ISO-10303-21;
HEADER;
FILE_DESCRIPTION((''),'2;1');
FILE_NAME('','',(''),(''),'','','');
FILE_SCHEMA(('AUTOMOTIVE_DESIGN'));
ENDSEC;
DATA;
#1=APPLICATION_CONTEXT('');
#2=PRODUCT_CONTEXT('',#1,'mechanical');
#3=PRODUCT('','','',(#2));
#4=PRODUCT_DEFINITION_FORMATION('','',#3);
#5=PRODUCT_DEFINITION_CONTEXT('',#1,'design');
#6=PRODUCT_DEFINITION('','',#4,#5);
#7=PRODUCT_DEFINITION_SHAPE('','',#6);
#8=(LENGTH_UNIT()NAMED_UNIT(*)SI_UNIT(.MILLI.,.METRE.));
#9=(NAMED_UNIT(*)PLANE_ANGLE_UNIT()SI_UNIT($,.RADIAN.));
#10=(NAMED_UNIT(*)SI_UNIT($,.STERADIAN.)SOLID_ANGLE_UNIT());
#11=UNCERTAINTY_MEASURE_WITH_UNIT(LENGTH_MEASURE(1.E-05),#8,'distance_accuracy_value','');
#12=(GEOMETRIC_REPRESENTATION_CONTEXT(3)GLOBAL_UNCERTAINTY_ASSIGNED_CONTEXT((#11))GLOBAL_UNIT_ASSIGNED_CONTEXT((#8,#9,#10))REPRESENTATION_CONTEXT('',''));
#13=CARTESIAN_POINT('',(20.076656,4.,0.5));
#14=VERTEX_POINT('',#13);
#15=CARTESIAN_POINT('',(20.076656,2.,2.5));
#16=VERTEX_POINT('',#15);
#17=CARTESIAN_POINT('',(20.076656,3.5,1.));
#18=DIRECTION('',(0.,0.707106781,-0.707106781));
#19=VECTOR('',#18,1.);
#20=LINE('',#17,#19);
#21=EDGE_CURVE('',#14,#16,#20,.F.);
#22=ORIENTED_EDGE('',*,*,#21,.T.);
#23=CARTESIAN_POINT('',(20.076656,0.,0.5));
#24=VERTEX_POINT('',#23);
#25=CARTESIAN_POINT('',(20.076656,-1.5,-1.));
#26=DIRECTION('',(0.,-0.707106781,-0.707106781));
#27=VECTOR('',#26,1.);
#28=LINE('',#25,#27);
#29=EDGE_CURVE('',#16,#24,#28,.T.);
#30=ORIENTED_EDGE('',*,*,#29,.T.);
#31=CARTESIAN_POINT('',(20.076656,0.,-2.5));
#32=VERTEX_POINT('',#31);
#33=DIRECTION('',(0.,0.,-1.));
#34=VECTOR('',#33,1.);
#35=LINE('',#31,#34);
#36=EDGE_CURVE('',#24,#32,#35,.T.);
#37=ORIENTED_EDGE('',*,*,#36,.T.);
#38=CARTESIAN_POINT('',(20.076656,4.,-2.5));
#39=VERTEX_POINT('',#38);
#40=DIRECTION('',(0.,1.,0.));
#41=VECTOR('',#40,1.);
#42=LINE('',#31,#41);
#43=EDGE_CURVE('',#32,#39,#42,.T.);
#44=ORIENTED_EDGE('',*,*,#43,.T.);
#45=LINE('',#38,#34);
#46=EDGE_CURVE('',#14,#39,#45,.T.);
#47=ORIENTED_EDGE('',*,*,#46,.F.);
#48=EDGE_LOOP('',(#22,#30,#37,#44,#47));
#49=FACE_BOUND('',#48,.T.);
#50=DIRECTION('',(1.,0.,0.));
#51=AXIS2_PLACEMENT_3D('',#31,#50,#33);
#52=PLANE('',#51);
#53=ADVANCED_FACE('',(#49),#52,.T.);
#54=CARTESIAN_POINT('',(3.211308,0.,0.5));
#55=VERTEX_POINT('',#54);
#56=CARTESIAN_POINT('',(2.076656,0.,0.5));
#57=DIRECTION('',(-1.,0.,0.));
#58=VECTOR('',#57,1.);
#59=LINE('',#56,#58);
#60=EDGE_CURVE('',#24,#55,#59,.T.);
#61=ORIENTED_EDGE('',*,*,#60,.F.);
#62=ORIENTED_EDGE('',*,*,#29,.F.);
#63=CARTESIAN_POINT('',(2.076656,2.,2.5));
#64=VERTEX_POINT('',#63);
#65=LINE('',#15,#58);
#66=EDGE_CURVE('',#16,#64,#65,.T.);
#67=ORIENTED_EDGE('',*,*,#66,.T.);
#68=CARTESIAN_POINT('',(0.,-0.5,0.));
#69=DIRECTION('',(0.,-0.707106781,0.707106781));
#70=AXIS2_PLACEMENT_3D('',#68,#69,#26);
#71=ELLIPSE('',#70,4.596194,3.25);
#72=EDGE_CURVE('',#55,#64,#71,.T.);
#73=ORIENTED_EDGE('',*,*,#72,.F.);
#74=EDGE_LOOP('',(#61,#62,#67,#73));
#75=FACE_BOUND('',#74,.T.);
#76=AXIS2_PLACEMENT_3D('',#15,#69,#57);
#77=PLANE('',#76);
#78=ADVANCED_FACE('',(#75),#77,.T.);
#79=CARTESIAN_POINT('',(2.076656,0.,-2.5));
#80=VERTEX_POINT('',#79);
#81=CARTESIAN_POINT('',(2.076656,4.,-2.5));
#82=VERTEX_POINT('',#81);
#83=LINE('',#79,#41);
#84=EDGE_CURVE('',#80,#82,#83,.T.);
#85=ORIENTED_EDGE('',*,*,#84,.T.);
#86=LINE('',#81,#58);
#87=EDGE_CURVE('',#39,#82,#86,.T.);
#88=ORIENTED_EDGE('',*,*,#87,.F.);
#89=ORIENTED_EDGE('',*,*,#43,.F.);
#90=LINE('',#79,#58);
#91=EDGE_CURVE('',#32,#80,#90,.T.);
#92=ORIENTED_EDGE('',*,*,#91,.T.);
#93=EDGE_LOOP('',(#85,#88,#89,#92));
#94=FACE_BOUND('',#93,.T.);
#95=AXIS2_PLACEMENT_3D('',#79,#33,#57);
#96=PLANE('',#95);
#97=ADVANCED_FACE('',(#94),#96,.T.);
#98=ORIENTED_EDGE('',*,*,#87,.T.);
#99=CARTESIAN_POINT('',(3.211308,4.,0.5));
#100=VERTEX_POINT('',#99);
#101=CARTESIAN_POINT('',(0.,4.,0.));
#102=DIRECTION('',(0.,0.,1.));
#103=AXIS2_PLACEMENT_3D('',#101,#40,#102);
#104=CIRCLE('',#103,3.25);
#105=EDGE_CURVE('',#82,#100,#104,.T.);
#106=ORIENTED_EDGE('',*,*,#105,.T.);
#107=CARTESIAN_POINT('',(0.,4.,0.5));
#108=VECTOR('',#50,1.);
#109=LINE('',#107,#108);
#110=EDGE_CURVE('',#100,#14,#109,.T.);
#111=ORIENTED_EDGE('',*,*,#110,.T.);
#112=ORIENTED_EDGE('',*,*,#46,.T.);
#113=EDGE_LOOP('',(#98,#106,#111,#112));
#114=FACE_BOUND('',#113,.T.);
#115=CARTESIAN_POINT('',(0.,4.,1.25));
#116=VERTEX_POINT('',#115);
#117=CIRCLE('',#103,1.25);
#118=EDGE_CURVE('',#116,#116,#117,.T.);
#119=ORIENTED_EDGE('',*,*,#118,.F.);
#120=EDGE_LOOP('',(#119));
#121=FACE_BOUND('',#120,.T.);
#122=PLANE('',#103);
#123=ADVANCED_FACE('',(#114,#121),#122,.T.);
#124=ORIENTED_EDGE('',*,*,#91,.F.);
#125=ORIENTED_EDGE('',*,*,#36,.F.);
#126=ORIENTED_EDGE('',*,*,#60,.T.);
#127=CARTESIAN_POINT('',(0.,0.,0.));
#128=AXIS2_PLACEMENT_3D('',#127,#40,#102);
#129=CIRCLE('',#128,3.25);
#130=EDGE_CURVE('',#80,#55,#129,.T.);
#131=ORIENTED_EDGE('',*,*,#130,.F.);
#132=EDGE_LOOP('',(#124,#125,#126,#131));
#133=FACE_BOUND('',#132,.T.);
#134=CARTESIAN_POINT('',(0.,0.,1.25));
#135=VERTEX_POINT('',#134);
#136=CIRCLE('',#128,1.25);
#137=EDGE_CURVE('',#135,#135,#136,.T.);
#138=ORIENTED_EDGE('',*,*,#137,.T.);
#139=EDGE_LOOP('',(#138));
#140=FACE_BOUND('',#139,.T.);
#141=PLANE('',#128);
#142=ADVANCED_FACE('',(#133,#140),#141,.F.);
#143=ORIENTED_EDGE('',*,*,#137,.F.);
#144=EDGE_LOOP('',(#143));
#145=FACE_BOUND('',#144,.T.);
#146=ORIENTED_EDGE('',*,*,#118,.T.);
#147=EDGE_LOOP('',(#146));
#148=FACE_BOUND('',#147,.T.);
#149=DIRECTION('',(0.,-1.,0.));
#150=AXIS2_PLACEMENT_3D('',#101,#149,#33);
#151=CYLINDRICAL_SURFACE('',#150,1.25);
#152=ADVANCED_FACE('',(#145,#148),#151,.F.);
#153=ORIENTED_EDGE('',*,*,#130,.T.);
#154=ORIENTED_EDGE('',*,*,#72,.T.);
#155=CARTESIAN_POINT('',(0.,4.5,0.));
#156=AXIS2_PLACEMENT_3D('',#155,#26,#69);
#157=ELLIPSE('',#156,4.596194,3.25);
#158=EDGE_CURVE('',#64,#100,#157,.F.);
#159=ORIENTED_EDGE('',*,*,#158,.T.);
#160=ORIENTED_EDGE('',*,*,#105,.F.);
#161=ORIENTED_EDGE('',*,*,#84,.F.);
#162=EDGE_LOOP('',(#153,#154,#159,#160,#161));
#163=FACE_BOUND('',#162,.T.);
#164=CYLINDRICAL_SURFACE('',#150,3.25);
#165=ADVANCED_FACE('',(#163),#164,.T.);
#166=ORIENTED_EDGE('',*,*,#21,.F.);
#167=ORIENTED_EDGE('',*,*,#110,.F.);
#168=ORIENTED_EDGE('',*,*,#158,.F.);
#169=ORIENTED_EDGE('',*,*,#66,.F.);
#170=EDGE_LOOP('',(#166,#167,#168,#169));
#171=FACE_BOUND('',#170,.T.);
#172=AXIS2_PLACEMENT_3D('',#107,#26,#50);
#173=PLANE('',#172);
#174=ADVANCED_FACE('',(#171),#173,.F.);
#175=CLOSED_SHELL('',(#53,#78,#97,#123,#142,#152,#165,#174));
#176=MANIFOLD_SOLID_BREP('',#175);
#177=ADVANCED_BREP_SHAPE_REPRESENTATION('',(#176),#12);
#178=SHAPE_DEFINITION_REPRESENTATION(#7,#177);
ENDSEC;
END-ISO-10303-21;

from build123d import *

# Parameters (mm, degrees)
CROQUIS1_R              = 3.25
CROQUIS1_R_2            = 1.25
SALIENTE_EXTRUIR1_DEPTH = 4
CROQUIS2_W              = 18
CROQUIS2_H              = 5
SALIENTE_EXTRUIR2_DEPTH = 4
CHAFL_N1_SIZE           = 2


with BuildPart() as part:
    # Croquis1 → Saliente-Extruir1 (new body)
    with BuildSketch(Plane(origin=(0, 0, 0), x_dir=(1, 0, 0), z_dir=(0, 1, 0))):
        with Locations(Location((0, 0, 0), (0, 0, 270))):
            Circle(CROQUIS1_R)
        with Locations(Location((0, 0, 0), (0, 0, 270))):
            Circle(CROQUIS1_R_2, mode=Mode.SUBTRACT)
    extrude(amount=SALIENTE_EXTRUIR1_DEPTH)

    # Croquis2 → Saliente-Extruir2 (add)
    with BuildSketch(Plane(origin=(0, 4, 0), x_dir=(1, 0, 0), z_dir=(0, 1, 0))):
        with Locations((11.076655966, 0)):
            Rectangle(CROQUIS2_W, CROQUIS2_H)
    extrude(amount=-SALIENTE_EXTRUIR2_DEPTH)

    # Chaflán1
    chafl_n1_edges = [part.edges().sort_by_distance(p)[0] for p in [
        (11.076655966, 4, 2.5),
        (11.076655966, 0, 2.5),
    ]]
    chamfer(chafl_n1_edges, length=CHAFL_N1_SIZE - 0.0001)  # a hair under: the kernel refuses the full size


solid = part.part
